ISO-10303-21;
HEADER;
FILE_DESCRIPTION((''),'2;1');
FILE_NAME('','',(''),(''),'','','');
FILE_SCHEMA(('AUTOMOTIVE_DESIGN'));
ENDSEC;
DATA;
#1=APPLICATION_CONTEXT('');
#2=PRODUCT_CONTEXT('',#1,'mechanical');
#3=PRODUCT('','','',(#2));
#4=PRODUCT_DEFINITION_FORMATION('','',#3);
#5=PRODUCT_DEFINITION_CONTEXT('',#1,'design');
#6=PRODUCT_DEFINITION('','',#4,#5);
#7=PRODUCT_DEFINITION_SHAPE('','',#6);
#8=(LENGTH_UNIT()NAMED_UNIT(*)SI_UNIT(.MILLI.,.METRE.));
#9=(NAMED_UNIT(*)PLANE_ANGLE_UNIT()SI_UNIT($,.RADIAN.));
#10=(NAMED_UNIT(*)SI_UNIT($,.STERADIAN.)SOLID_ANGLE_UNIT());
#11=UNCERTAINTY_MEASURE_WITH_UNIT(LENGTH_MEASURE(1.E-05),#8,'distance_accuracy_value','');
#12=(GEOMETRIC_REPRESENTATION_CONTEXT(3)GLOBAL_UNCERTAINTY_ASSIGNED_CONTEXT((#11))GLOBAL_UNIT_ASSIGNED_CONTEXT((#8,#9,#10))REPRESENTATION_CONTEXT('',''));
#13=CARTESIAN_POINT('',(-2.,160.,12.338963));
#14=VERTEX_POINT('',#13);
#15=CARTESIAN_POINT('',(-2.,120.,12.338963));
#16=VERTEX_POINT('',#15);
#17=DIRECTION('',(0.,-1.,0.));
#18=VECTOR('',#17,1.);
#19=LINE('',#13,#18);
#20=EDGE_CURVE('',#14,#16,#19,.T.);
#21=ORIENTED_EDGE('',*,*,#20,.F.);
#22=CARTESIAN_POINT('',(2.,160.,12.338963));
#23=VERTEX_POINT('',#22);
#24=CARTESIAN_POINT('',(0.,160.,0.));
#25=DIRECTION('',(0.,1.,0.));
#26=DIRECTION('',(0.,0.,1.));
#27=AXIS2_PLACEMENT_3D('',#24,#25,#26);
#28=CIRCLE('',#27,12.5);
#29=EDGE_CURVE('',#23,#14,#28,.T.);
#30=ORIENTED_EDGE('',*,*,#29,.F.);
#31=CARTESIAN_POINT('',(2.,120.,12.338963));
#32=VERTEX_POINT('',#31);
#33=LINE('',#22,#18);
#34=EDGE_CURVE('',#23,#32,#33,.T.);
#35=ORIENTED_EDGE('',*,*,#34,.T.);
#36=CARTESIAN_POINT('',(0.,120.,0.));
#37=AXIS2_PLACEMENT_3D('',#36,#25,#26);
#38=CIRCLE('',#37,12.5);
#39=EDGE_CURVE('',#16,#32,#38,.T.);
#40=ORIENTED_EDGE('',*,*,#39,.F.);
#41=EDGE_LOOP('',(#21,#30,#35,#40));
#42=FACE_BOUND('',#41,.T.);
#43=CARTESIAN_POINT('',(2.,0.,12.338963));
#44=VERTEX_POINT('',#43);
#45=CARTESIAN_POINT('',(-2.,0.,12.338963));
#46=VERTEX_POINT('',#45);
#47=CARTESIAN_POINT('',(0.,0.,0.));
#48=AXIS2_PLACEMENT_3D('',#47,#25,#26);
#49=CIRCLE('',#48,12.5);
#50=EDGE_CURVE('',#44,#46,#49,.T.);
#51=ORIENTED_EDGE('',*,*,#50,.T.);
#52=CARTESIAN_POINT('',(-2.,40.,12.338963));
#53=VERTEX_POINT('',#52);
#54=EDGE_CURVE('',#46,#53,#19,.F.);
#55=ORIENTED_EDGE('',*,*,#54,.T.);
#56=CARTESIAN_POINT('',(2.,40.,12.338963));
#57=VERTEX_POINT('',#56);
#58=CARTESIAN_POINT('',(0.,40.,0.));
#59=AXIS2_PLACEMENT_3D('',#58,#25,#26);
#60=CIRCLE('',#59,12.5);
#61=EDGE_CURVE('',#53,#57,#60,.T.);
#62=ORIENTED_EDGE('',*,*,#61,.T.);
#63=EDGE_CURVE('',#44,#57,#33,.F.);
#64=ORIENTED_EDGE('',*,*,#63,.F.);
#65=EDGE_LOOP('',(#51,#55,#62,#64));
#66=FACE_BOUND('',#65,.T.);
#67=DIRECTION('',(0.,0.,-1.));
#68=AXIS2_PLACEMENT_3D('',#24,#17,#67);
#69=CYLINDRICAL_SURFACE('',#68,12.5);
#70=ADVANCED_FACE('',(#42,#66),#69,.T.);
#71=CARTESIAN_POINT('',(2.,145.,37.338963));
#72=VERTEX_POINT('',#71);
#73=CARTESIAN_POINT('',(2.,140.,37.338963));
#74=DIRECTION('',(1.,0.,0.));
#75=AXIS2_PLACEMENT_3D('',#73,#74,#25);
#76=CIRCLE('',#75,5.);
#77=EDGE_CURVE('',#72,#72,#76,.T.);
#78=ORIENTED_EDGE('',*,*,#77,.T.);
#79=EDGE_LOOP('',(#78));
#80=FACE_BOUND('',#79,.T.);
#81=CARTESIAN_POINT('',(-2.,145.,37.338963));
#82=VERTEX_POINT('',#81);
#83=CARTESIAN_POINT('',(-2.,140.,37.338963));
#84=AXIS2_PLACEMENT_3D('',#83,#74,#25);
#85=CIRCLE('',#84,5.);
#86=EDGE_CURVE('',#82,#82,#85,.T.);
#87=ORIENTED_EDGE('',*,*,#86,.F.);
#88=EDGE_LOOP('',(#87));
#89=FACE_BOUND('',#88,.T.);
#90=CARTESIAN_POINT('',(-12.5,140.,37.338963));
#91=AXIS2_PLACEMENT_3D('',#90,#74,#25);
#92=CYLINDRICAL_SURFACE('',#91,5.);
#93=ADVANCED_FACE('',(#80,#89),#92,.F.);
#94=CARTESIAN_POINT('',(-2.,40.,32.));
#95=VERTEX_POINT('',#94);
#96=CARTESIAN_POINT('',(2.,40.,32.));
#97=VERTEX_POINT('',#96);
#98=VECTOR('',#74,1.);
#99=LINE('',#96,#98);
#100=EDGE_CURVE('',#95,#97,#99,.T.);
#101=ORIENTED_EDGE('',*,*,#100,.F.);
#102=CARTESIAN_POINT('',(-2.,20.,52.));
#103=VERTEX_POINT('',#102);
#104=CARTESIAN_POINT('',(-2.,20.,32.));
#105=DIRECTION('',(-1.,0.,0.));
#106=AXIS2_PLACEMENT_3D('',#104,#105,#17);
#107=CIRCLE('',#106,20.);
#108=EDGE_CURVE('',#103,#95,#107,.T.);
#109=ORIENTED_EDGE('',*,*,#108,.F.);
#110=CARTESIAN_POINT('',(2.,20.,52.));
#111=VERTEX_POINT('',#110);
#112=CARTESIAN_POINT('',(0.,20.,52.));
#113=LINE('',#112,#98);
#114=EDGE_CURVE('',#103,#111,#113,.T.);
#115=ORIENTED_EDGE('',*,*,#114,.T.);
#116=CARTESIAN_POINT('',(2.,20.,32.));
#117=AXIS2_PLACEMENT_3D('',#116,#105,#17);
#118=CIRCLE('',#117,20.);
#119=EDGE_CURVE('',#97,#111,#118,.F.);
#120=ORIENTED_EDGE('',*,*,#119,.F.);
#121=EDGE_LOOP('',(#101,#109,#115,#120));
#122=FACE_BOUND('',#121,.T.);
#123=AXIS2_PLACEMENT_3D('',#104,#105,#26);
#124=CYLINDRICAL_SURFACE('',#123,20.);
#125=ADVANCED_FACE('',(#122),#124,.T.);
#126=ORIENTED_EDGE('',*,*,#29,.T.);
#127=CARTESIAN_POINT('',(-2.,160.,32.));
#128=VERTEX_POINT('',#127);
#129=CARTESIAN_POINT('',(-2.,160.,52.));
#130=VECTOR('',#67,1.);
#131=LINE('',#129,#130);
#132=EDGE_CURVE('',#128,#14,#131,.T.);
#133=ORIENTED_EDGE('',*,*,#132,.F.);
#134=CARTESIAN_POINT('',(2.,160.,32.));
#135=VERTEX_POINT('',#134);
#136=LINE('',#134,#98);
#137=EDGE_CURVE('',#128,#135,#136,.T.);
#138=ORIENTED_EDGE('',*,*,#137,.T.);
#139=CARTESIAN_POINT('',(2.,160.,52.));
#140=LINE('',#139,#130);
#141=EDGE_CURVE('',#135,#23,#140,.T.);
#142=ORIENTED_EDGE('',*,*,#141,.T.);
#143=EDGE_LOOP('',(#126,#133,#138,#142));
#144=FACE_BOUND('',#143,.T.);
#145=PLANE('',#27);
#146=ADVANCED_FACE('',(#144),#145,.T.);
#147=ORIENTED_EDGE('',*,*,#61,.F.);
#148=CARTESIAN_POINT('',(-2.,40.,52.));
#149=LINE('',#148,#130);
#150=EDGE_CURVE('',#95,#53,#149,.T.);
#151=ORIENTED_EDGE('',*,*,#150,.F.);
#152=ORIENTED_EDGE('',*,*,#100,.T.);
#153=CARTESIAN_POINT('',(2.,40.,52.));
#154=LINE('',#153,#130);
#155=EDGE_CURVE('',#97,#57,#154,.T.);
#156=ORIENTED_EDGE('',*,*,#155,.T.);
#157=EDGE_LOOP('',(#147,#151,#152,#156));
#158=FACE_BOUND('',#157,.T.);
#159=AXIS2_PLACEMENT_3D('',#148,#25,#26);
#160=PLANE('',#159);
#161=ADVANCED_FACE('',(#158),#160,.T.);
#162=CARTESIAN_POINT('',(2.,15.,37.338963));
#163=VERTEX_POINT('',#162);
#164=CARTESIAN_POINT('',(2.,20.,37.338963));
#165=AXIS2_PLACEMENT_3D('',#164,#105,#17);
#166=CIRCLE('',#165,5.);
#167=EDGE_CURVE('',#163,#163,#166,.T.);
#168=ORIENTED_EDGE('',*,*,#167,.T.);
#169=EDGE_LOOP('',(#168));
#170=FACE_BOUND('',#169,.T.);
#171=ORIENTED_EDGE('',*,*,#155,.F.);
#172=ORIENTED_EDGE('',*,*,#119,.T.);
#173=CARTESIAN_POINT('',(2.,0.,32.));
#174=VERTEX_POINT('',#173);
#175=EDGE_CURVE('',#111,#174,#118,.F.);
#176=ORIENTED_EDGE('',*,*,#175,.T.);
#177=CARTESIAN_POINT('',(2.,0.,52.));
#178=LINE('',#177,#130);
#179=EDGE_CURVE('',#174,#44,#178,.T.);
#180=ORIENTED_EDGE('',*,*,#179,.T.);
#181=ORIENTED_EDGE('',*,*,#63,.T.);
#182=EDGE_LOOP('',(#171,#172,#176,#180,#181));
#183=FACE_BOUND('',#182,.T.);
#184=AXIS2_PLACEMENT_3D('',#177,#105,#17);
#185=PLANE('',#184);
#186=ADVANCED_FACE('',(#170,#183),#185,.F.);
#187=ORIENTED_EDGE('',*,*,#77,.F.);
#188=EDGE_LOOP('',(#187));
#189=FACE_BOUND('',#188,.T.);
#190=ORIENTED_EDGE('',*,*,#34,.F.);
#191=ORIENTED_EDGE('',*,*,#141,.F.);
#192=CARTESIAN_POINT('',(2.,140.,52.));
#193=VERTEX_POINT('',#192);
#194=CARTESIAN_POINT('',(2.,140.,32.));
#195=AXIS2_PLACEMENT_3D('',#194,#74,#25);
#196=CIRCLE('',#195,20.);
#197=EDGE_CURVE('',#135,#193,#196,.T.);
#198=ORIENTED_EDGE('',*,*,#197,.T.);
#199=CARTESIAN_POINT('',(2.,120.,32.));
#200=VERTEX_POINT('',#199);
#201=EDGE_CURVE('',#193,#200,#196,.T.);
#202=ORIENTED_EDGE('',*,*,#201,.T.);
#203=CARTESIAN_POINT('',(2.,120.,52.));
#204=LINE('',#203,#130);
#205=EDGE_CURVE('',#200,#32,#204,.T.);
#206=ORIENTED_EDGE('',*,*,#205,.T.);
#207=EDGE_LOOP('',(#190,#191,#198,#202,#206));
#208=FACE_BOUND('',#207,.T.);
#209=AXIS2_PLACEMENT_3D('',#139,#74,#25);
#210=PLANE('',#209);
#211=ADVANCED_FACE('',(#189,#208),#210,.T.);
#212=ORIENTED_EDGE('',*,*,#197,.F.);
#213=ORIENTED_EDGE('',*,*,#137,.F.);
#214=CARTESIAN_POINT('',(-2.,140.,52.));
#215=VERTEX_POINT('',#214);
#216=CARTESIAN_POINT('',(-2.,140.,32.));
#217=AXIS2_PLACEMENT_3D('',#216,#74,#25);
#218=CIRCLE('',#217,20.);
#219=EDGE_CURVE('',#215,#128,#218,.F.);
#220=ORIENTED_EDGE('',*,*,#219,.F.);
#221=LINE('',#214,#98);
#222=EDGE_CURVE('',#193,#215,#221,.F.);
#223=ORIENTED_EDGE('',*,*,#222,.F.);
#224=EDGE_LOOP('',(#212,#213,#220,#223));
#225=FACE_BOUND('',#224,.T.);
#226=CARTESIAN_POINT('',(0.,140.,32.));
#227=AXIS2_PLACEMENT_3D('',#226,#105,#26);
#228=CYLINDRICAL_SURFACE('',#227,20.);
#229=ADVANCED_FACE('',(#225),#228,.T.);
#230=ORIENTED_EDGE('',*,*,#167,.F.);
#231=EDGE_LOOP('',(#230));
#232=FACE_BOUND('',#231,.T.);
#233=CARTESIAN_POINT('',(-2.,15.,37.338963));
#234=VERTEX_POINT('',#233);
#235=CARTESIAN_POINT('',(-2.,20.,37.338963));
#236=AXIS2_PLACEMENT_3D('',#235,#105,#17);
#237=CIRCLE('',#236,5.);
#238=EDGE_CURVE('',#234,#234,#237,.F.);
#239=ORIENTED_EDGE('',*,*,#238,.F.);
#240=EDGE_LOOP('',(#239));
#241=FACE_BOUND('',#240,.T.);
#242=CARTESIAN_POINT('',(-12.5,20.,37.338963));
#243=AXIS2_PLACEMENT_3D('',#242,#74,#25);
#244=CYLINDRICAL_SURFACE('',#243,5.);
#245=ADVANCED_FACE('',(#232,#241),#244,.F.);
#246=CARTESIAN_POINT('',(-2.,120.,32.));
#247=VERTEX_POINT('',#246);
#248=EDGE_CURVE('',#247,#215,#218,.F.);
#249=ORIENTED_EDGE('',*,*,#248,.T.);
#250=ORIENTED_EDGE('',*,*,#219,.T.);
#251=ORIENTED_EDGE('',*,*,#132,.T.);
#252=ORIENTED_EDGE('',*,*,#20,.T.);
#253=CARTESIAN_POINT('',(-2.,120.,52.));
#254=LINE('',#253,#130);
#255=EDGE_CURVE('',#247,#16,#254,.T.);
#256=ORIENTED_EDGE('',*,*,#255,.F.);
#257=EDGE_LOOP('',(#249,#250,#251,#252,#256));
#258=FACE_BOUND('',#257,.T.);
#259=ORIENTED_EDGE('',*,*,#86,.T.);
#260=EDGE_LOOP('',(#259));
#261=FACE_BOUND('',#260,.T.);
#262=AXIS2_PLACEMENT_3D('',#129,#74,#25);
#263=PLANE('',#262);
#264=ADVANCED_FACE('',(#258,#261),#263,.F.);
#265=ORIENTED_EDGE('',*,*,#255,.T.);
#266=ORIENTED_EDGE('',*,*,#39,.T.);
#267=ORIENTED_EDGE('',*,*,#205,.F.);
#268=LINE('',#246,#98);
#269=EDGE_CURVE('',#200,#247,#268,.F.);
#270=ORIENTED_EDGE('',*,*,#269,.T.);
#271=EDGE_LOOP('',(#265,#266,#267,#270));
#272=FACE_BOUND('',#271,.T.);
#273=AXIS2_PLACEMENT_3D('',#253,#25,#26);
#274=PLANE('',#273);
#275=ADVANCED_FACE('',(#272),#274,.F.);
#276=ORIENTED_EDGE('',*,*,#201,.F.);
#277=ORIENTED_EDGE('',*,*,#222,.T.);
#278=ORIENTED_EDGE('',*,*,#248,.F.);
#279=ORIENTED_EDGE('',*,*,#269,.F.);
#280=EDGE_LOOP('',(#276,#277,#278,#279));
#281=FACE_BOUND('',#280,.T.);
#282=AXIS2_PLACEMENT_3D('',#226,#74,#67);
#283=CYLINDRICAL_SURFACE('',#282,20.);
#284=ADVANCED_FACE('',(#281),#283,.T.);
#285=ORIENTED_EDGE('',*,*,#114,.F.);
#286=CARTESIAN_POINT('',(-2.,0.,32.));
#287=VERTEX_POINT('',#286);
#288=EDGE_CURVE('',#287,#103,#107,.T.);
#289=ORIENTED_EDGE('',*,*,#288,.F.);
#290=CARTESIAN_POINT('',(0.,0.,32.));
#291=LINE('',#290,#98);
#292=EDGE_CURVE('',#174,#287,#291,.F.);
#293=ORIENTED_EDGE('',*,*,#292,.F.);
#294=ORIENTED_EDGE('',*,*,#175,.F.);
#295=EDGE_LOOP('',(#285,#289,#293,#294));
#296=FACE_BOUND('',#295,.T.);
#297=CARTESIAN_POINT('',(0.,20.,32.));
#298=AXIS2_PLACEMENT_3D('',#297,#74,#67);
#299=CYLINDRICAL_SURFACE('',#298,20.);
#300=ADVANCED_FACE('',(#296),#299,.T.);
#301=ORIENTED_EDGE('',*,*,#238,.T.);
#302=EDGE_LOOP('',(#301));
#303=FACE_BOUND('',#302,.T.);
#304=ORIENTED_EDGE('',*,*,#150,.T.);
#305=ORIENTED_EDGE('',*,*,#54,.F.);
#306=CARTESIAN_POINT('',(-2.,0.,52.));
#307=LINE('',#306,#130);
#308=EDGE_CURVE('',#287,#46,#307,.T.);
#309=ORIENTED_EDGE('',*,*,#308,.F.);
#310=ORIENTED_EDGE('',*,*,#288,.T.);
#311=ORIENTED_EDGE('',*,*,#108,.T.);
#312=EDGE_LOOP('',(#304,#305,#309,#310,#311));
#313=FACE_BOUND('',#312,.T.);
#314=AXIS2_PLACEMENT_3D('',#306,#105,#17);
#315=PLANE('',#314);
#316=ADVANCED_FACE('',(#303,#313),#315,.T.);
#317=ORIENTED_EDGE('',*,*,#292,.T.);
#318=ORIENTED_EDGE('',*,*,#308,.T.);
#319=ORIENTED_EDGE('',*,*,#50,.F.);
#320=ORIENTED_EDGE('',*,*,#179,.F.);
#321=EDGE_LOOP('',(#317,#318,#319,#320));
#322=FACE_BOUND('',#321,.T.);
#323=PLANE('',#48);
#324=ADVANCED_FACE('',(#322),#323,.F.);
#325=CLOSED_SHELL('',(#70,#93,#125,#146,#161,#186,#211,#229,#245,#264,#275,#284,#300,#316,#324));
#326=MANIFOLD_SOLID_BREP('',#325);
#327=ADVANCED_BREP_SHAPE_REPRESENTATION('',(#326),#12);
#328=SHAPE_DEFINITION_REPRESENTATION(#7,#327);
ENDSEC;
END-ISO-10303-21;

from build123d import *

# Parameters (mm, degrees)
SKETCH1_R            = 12.5
BOSS_EXTRUDE1_DEPTH  = 160
SKETCH2_W            = 4
SKETCH2_H            = 40
BOSS_EXTRUDE2_DEPTH  = 40
FILLET1_R            = 20
SKETCH3_R            = 5
CUT_EXTRUDE1_DEPTH   = 169.861629745
FILLET1_OF_MIRROR2_R = 20


with BuildPart() as part:
    # Sketch1 → Boss-Extrude1 (new body)
    with BuildSketch(Plane(origin=(0, 0, 0), x_dir=(1, 0, 0), z_dir=(0, 1, 0))):
        with Locations(Location((0, 0, 0), (0, 0, 270))):
            Circle(SKETCH1_R)
    extrude(amount=BOSS_EXTRUDE1_DEPTH)

    # Sketch2 → Boss-Extrude2 (add)
    with BuildSketch(Plane.XY.offset(12)):
        with Locations((0, 140)):
            Rectangle(SKETCH2_W, SKETCH2_H)
    boss_extrude2 = extrude(amount=BOSS_EXTRUDE2_DEPTH)

    # Fillet1
    fillet1_edges = [part.edges().sort_by_distance(p)[0] for p in [
        (0, 120, 52),
        (0, 160, 52),
    ]]
    fillet(fillet1_edges, radius=FILLET1_R - 0.0001)  # a hair under: the kernel refuses the full size

    # Sketch3 → Cut-Extrude1 (cut, through all)
    with BuildSketch(Plane(origin=(2, 0, 0), x_dir=(0, 0, -1), z_dir=(1, 0, 0))):
        with Locations(Location((-37.338962679, 140, 0), (0, 0, 90))):
            Circle(SKETCH3_R)
    cut_extrude1 = extrude(amount=-CUT_EXTRUDE1_DEPTH, mode=Mode.SUBTRACT)

    # Mirror2: Boss-Extrude2, Cut-Extrude1 across plane
    add(boss_extrude2.mirror(Plane.ZX.offset(80)))
    add(cut_extrude1.mirror(Plane.ZX.offset(80)), mode=Mode.SUBTRACT)

    # Fillet1 of Mirror2
    fillet1_of_mirror2_edges = [part.edges().sort_by_distance(p)[0] for p in [
        (0, 40, 52),
        (0, 0, 52),
    ]]
    fillet(fillet1_of_mirror2_edges, radius=FILLET1_OF_MIRROR2_R - 0.0001)  # a hair under: the kernel refuses the full size


solid = part.part
